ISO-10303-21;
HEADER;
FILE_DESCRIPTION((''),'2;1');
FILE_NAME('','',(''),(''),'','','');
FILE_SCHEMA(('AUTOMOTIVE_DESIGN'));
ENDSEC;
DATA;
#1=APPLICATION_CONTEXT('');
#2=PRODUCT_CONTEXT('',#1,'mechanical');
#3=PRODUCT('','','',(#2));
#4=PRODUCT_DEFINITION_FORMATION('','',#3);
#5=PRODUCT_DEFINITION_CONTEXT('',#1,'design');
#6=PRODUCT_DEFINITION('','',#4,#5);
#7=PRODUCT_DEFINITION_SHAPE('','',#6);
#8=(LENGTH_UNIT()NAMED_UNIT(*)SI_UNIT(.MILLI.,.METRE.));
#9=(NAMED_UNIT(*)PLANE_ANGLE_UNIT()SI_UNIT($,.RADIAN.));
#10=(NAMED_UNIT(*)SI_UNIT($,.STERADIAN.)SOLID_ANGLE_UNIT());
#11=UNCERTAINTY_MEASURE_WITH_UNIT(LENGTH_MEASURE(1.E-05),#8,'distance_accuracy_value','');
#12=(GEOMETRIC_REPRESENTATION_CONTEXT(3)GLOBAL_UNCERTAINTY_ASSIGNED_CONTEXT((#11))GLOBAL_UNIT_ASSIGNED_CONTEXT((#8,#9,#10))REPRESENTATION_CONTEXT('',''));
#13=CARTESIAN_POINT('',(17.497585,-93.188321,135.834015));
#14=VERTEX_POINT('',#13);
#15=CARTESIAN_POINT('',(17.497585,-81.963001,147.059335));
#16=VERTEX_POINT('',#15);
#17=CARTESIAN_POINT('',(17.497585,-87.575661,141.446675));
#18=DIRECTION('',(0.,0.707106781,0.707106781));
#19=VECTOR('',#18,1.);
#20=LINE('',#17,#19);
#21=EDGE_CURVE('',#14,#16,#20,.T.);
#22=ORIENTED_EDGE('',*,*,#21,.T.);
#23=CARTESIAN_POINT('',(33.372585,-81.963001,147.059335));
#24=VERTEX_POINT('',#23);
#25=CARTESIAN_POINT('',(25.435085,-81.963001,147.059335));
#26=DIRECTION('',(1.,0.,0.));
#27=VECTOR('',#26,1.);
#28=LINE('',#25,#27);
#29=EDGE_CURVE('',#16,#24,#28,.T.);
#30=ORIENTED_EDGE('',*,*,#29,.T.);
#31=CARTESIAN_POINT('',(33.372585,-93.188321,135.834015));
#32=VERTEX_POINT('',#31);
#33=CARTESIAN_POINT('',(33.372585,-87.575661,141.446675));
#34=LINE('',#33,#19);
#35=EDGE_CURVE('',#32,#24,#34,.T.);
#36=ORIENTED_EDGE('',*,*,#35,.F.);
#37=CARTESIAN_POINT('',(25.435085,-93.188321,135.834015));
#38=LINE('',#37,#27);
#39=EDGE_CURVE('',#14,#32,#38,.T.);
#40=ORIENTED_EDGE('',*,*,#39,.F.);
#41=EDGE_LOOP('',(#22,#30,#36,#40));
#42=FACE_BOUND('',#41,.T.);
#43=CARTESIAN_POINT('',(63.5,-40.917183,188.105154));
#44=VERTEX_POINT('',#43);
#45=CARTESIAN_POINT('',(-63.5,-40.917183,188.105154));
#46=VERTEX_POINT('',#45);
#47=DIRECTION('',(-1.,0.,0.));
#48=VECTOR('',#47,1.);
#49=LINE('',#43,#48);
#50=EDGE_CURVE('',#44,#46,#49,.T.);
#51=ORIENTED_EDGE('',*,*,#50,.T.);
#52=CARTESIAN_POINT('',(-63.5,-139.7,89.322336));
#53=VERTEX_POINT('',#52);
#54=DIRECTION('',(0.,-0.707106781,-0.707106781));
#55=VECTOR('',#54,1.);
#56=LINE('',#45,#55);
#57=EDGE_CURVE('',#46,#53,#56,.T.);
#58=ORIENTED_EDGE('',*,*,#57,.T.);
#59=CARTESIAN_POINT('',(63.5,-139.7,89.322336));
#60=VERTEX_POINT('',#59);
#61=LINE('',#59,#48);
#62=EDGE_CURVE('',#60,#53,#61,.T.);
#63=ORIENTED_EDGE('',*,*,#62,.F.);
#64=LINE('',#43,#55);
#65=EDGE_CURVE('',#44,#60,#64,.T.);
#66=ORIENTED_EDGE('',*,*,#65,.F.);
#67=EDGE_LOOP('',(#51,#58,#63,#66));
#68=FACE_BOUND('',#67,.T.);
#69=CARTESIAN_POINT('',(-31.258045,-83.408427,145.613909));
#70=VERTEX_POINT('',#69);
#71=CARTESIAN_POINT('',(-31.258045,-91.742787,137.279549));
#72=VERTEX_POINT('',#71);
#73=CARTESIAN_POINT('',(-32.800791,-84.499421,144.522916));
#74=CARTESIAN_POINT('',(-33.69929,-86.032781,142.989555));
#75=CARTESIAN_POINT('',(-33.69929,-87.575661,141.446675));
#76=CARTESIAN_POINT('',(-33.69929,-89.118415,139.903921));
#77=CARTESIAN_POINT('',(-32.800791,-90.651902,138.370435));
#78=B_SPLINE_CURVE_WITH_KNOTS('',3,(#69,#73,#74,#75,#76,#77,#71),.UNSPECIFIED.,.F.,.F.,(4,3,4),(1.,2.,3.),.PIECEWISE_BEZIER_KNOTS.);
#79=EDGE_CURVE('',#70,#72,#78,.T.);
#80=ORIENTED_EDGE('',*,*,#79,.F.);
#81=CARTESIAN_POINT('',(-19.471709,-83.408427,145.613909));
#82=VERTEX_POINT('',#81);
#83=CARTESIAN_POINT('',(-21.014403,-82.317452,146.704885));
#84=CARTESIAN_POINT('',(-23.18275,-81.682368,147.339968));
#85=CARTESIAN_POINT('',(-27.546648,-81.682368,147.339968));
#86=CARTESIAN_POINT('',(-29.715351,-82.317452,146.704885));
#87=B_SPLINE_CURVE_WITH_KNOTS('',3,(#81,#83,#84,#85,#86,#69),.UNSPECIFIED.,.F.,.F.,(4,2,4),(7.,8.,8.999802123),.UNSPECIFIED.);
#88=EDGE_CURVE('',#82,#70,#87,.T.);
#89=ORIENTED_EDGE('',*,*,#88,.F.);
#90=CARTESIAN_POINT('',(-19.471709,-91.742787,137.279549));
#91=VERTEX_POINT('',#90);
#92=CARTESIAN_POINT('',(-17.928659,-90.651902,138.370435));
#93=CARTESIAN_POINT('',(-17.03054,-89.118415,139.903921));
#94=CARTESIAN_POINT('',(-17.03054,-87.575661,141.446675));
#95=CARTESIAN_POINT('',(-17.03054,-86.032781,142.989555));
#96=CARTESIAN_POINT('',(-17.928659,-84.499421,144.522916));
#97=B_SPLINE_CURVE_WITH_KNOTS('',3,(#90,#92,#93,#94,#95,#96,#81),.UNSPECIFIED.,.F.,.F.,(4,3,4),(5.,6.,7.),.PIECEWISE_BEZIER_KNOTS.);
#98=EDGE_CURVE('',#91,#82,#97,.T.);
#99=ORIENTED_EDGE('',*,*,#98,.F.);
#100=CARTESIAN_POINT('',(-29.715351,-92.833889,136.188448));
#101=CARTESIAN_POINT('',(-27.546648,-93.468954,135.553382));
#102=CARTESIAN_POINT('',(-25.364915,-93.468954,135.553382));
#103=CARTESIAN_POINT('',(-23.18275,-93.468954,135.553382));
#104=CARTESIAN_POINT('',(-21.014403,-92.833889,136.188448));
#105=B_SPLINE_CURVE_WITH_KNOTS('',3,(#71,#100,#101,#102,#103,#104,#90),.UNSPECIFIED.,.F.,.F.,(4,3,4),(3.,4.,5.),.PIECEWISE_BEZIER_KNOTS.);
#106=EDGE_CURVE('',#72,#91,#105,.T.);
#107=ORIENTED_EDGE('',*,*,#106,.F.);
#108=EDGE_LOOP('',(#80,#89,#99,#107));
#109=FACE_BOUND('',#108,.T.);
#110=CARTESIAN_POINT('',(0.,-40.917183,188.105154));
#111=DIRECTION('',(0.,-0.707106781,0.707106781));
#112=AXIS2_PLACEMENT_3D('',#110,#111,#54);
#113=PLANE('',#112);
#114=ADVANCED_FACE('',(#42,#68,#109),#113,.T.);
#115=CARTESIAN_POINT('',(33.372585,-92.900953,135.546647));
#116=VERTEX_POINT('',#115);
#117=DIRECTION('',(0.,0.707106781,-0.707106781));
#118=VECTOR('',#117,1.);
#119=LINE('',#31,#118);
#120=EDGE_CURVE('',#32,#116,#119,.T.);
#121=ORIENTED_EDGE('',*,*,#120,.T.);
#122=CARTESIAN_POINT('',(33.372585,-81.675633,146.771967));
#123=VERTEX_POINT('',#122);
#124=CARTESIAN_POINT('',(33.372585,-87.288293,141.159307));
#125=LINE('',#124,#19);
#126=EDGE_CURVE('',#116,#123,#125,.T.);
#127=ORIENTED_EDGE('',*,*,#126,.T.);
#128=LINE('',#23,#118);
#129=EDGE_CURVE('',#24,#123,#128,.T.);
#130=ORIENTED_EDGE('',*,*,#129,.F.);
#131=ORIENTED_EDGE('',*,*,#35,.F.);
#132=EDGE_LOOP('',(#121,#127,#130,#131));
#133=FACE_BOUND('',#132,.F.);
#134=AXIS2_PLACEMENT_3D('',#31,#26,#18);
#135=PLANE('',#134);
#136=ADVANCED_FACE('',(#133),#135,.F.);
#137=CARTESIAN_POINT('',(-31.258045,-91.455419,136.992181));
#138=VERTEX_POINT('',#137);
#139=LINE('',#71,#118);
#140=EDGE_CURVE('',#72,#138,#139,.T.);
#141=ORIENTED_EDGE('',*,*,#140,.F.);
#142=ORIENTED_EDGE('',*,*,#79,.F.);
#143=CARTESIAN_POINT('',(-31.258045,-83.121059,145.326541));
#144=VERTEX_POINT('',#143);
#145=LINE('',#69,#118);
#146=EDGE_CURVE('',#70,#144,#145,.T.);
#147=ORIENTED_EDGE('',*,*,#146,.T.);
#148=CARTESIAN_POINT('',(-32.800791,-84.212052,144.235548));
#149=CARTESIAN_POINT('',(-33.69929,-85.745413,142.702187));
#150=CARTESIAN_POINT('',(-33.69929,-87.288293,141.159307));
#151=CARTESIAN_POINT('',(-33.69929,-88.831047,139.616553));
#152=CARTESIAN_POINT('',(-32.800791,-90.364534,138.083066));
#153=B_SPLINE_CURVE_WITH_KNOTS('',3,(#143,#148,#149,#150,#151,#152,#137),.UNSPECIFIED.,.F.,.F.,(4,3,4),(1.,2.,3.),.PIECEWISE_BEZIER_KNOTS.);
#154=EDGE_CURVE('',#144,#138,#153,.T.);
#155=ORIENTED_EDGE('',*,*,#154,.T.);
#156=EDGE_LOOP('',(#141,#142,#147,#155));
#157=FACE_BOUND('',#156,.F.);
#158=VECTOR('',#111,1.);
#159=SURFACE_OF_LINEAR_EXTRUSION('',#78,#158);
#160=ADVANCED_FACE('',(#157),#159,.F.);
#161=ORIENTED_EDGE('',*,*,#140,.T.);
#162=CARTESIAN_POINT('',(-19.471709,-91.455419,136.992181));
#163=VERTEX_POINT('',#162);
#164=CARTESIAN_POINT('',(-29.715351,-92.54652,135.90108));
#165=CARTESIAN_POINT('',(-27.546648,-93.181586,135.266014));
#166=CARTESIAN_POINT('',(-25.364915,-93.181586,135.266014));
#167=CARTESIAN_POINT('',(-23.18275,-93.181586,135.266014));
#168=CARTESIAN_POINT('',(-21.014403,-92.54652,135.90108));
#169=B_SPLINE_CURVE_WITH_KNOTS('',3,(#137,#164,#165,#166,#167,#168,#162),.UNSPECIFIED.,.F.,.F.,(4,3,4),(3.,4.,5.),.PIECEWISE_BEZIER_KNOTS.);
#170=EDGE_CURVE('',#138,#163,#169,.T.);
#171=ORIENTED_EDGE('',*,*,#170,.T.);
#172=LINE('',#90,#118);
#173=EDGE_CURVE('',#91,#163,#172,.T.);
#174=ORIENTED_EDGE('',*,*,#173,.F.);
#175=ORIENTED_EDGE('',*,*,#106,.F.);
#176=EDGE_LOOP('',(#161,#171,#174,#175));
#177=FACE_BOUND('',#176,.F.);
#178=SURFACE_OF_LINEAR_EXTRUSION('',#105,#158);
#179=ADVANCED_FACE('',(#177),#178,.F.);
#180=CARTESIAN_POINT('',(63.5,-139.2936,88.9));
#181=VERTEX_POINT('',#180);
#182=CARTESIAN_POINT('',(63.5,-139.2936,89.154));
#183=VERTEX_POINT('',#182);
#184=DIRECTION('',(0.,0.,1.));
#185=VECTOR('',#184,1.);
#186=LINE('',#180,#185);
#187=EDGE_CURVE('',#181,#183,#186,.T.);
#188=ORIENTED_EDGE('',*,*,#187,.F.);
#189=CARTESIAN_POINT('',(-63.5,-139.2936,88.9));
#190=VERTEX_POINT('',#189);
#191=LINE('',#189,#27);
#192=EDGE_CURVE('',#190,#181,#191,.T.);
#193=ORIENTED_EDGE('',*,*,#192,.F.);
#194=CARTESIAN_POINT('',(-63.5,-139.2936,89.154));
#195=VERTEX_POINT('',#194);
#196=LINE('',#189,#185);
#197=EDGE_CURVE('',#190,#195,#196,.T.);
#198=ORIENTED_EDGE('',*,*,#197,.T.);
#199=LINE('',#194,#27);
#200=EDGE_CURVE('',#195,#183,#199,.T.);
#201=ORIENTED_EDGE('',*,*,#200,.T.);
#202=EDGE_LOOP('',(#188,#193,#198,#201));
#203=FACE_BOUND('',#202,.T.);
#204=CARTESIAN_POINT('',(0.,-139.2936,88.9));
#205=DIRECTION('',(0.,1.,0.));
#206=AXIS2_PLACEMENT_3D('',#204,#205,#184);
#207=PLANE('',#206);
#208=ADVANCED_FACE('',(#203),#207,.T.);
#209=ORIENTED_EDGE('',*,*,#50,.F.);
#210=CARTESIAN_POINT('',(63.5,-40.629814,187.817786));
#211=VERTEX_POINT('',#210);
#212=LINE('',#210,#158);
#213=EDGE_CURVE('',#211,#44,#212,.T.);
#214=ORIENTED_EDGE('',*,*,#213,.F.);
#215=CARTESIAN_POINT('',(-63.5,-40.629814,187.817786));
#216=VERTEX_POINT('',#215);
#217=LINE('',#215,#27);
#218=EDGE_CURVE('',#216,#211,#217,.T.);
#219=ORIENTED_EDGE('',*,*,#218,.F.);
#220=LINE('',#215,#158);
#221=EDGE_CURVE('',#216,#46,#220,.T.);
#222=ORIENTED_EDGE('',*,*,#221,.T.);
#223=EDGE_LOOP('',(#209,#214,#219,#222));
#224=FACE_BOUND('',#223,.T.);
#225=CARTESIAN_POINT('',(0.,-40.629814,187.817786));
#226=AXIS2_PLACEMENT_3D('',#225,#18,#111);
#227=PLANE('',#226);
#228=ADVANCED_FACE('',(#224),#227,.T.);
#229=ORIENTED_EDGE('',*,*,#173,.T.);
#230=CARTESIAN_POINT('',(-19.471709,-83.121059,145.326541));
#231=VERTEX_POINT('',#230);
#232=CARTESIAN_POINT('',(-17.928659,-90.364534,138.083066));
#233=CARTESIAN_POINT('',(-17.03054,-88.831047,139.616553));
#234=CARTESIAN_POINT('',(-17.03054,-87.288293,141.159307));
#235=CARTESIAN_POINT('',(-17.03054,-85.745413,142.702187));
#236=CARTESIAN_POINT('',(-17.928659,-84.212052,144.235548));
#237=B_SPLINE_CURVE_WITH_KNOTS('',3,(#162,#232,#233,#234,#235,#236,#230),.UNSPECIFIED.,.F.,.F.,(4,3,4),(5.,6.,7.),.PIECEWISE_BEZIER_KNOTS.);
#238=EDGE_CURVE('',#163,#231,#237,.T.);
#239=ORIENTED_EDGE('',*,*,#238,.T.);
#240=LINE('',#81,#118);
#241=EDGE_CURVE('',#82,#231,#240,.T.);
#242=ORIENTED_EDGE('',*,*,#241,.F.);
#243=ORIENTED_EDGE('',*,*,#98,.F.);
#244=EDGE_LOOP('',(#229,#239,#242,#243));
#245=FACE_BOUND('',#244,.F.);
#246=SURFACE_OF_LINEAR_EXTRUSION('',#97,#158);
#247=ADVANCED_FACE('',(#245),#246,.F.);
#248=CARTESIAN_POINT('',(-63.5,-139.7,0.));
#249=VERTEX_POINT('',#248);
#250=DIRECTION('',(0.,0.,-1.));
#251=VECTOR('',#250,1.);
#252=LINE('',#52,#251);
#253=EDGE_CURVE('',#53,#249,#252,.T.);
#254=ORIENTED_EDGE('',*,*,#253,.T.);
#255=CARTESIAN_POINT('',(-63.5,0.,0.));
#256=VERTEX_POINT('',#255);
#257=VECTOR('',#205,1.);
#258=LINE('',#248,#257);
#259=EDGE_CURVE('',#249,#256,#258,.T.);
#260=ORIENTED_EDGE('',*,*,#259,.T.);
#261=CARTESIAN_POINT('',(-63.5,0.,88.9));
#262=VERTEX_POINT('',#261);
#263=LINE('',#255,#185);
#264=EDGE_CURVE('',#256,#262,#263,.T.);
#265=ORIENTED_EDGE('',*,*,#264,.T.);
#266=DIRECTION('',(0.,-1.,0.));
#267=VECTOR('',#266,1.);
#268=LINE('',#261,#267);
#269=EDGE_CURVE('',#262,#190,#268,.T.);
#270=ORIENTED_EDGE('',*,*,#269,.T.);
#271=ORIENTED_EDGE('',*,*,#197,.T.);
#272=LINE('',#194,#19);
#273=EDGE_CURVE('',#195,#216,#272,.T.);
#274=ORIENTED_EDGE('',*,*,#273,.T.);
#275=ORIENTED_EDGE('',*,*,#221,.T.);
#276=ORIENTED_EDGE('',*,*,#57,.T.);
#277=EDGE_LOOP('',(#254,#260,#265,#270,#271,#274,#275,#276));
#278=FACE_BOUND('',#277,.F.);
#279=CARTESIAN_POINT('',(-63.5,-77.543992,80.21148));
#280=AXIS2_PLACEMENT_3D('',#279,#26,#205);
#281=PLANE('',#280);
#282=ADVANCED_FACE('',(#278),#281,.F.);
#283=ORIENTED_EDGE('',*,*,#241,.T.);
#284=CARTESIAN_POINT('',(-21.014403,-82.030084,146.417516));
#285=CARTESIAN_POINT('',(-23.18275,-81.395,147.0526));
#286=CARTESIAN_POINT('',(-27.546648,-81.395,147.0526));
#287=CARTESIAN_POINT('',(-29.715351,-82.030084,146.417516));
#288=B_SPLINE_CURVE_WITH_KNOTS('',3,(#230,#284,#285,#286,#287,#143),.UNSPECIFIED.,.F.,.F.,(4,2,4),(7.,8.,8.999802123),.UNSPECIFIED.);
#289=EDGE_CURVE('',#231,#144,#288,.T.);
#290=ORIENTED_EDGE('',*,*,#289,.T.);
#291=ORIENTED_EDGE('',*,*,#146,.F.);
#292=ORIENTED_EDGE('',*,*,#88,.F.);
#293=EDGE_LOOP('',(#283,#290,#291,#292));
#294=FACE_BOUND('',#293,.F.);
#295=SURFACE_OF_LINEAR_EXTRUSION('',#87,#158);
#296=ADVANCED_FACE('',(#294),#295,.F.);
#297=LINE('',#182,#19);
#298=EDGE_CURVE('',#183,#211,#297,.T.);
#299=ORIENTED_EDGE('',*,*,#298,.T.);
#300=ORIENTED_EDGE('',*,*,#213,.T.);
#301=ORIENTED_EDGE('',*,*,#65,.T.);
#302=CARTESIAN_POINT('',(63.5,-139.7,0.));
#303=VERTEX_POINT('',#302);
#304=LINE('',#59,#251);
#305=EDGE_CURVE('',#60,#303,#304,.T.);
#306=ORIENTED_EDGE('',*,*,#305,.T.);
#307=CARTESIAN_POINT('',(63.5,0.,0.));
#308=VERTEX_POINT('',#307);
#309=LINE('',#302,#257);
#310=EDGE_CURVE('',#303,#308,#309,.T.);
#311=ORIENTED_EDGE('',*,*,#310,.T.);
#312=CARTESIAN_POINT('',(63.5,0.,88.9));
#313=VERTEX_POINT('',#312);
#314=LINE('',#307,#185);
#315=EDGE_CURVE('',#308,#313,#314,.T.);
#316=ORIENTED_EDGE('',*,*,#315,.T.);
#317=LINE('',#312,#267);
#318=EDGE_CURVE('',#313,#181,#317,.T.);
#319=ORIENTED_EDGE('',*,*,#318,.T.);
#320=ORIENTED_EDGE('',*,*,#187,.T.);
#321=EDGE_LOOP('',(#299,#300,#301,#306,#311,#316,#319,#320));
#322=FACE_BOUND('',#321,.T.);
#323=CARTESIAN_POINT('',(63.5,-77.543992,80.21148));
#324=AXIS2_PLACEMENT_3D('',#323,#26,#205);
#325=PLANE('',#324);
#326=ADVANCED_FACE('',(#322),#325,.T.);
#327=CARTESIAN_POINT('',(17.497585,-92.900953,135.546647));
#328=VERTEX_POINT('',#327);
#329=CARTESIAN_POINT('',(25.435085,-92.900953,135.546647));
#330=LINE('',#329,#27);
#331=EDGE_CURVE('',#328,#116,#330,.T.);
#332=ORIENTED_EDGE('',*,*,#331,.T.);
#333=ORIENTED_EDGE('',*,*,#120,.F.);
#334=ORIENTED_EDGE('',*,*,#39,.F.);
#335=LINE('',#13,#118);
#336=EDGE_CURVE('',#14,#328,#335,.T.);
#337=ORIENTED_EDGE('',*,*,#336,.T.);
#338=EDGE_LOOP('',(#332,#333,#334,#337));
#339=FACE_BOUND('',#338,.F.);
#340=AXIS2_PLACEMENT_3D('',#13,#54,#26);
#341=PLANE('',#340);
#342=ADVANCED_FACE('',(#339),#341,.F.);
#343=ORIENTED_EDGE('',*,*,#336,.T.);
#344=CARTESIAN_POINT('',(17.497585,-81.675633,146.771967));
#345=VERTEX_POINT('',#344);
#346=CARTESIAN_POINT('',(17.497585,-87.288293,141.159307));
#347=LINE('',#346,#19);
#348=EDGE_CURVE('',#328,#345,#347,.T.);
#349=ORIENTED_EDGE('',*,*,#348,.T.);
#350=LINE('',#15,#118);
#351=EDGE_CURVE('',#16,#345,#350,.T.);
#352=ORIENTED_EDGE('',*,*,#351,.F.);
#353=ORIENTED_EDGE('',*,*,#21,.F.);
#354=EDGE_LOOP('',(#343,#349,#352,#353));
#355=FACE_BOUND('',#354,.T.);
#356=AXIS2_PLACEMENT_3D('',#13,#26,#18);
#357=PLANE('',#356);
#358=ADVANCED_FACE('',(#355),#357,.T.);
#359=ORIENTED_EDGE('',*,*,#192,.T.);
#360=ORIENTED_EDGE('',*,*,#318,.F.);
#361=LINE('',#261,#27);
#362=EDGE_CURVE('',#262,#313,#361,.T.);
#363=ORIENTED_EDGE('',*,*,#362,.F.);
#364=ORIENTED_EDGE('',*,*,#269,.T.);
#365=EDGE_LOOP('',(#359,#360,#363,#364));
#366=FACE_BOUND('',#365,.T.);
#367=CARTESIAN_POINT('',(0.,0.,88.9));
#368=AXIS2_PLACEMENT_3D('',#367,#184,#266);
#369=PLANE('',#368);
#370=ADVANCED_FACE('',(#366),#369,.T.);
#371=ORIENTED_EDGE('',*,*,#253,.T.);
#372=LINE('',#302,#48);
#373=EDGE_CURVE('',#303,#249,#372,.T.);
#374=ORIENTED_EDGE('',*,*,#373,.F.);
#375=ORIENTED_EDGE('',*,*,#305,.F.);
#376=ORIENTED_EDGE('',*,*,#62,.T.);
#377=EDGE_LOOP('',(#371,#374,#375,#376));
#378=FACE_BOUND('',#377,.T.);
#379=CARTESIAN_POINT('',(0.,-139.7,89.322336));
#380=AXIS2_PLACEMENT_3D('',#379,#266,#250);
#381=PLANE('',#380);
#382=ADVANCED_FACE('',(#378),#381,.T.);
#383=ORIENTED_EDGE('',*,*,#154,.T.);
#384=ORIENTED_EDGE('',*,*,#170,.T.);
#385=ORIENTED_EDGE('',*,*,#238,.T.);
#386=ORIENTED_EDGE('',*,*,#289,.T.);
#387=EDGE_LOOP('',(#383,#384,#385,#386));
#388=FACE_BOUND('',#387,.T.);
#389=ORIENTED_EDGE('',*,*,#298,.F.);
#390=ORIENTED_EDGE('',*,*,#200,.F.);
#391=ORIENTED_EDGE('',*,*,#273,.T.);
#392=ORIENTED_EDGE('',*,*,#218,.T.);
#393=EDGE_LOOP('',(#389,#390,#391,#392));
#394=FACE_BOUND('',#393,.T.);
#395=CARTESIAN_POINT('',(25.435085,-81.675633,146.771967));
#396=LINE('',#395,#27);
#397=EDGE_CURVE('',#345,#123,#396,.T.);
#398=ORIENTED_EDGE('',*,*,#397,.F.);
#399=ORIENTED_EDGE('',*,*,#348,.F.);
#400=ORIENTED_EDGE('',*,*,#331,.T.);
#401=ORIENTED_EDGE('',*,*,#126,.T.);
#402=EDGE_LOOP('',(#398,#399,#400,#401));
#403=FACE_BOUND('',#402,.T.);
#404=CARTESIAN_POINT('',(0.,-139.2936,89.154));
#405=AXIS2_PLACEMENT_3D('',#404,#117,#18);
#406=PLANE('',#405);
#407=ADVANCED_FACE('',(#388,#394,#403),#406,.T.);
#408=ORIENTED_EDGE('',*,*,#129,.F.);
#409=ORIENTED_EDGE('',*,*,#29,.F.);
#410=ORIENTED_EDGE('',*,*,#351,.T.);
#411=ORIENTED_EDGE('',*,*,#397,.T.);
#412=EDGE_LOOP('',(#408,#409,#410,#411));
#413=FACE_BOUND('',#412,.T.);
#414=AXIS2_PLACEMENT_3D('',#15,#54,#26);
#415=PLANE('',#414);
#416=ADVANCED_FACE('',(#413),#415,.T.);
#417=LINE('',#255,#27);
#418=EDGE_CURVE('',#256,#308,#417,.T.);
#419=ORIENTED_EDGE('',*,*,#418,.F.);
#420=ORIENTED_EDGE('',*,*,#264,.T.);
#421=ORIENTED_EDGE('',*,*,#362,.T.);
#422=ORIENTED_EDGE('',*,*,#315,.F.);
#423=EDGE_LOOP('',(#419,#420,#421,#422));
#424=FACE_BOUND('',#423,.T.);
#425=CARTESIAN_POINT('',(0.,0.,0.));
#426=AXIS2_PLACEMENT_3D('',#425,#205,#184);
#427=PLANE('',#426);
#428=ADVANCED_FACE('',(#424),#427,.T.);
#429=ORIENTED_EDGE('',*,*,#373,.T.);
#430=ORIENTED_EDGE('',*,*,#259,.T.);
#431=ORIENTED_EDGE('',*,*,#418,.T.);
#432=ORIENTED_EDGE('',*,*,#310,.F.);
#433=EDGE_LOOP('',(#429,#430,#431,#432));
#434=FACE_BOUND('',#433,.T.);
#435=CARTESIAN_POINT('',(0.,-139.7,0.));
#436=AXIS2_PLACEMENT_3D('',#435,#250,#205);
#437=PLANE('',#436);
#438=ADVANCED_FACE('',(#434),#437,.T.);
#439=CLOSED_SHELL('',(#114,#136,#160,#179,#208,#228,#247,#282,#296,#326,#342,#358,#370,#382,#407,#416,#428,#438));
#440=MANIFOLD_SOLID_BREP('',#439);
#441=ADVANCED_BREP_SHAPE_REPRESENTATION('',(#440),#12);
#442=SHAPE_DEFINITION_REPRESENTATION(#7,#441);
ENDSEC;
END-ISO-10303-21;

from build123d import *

# Parameters (mm, degrees)
F1_DEPTH = 63.5
F2_W     = 15.875
F2_H     = 15.875
F3_DEPTH = 0.4064


# Not quite as in the source:
# - the dataset's text gives a spline's control points without its knots; the knots are read off the source's solid


with BuildPart() as f1:
    # F0 (on Right) → F1 (new body, symmetric)
    with BuildSketch(Plane.YZ):
        Polygon((-139.7, 0), (0, 0), (0, 88.9), (-139.2936, 88.9), (-139.2936, 89.154), (-40.6298144724, 187.8177855276), (-40.9171826682, 188.1051537235), (-139.7, 89.3223363917), align=None)
    extrude(amount=F1_DEPTH, both=True)

    # F2 (on face) → F3 (cut, through all)
    with BuildSketch(Plane(origin=(0, -114.5111681959, 114.5111681959), x_dir=(1, 0, 0), z_dir=(0, -0.7071067812, 0.7071067812))):
        with Locations((25.435084784, 38.0925593219)):
            Rectangle(F2_W, F2_H)
        with BuildLine():
            add(Edge.make_bspline(
                [(-19.471708816, 43.9859181219), (-21.014403216, 45.5287903219), (-23.182750416, 46.4269343219), (-25.364915216, 46.4269343219)],
                knots=[7, 7, 7, 7, 8, 8, 8, 8], degree=3))
            add(Edge.make_bspline(
                [(-25.364915216, 46.4269343219), (-27.546648216, 46.4269343219), (-29.715351016, 45.5287903219), (-31.258045416, 43.9859181219)],
                knots=[0, 0, 0, 0, 1, 1, 1, 1], degree=3))
            add(Edge.make_bspline(
                [(-31.258045416, 43.9859181219), (-32.800790616, 42.4430205219), (-33.699290216, 40.2745209219), (-33.699290216, 38.0925593219), (-33.699290216, 35.9107755219), (-32.800790616, 33.7420981219), (-31.258045416, 32.1993529219)],
                knots=[1, 1, 1, 1, 2, 2, 2, 3, 3, 3, 3], degree=3))
            add(Edge.make_bspline(
                [(-31.258045416, 32.1993529219), (-29.715351016, 30.6563029219), (-27.546648216, 29.7581843219), (-25.364915216, 29.7581843219), (-23.182750416, 29.7581843219), (-21.014403216, 30.6563029219), (-19.471708816, 32.1993529219)],
                knots=[3, 3, 3, 3, 4, 4, 4, 5, 5, 5, 5], degree=3))
            add(Edge.make_bspline(
                [(-19.471708816, 32.1993529219), (-17.928658816, 33.7420981219), (-17.030540216, 35.9107755219), (-17.030540216, 38.0925593219), (-17.030540216, 40.2745209219), (-17.928658816, 42.4430205219), (-19.471708816, 43.9859181219)],
                knots=[5, 5, 5, 5, 6, 6, 6, 7, 7, 7, 7], degree=3))
        make_face()
    extrude(amount=-F3_DEPTH, mode=Mode.SUBTRACT)


solid = f1.part
